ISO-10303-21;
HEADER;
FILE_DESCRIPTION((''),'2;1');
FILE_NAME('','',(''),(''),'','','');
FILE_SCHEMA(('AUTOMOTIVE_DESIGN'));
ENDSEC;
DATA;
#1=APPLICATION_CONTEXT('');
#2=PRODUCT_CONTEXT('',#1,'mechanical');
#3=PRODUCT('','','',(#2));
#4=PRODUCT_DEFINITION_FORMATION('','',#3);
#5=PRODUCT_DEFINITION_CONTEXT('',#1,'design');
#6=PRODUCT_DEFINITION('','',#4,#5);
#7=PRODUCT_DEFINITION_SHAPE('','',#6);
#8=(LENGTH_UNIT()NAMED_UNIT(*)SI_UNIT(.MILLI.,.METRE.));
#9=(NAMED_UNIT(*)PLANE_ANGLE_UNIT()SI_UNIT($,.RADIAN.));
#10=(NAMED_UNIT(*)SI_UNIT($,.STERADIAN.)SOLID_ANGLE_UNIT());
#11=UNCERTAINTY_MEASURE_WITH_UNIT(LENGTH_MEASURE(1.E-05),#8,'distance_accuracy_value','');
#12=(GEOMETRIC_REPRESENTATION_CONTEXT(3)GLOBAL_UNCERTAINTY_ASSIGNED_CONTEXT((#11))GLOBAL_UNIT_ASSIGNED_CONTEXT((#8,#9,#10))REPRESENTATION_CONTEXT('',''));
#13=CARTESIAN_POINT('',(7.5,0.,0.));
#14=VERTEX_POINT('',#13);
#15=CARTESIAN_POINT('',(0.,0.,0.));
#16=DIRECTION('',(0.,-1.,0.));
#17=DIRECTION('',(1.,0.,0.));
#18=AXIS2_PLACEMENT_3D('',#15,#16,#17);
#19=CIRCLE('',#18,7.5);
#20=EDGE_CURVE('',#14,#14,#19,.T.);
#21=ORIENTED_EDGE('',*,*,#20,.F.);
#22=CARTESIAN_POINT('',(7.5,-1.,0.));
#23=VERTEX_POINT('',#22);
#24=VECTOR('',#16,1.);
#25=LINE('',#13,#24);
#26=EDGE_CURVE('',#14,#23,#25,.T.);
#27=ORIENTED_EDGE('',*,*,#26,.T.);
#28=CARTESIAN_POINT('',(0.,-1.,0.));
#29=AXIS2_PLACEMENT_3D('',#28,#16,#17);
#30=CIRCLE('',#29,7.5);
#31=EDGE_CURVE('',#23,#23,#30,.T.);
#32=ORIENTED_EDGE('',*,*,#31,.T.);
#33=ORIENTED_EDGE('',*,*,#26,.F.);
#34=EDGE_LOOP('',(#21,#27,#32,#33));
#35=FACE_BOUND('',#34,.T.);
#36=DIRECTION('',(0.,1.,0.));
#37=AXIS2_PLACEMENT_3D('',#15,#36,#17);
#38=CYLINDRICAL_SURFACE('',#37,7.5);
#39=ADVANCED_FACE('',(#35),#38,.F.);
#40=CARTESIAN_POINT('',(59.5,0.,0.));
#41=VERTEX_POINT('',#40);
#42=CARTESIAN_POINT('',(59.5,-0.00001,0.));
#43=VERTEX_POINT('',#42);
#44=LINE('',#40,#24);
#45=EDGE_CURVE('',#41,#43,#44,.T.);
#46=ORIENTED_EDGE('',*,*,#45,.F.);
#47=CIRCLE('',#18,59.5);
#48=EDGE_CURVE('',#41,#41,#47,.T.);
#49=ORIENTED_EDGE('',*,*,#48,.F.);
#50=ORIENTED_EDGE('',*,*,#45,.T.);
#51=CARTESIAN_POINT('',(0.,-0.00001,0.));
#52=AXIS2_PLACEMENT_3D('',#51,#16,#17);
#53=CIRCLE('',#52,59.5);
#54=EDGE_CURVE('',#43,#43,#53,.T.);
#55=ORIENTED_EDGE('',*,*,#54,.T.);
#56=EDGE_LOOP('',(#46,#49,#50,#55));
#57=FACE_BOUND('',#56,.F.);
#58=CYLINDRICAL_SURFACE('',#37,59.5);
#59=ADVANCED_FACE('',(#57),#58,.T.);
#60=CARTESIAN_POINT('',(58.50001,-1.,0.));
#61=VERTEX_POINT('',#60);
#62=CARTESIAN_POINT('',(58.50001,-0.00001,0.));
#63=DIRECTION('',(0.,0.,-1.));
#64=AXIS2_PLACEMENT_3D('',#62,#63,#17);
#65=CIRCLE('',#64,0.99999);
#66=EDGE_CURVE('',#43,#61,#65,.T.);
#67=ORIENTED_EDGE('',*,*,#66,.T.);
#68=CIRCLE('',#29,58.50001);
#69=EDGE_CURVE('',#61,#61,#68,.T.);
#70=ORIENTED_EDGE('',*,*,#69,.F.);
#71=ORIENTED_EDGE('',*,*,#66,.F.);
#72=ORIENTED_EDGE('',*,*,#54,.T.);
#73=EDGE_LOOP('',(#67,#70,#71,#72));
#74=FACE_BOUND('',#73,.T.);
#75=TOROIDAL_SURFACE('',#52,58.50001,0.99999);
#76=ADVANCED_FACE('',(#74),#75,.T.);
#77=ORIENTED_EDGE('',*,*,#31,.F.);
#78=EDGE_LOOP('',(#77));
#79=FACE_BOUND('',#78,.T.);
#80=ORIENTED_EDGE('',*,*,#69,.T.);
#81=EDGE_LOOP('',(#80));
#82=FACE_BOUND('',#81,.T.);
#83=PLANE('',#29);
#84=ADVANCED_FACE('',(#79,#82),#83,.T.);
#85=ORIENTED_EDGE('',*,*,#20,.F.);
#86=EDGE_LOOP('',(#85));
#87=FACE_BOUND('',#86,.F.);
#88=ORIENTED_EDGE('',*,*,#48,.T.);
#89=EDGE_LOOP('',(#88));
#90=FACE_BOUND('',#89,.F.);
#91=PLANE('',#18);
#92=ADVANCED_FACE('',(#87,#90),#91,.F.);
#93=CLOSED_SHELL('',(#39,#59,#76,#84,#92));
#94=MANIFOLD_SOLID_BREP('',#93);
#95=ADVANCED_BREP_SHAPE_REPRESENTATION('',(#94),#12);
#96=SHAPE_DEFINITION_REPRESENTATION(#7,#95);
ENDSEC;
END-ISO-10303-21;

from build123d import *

# Parameters (mm, degrees)
F0_R     = 59.5
F0_R_2   = 7.5
F1_DEPTH = 1
F2_R     = 0.99999


# Not quite as in the source:
# - a fillet or chamfer is up to 0.001 mm smaller than in the source, because OpenCascade refuses the exact size


with BuildPart() as f1:
    # F0 (on Front) → F1 (new body)
    with BuildSketch(Plane.XZ):
        Circle(F0_R)
        Circle(F0_R_2, mode=Mode.SUBTRACT)
    extrude(amount=F1_DEPTH)

    # F2 (radius 1 in the source; OpenCascade refuses exactly that, so slightly less here)
    f2_edges = [f1.edges().sort_by_distance(p)[0] for p in [
        (-59.5, -1, 0),
    ]]
    fillet(f2_edges, radius=F2_R)


solid = f1.part
